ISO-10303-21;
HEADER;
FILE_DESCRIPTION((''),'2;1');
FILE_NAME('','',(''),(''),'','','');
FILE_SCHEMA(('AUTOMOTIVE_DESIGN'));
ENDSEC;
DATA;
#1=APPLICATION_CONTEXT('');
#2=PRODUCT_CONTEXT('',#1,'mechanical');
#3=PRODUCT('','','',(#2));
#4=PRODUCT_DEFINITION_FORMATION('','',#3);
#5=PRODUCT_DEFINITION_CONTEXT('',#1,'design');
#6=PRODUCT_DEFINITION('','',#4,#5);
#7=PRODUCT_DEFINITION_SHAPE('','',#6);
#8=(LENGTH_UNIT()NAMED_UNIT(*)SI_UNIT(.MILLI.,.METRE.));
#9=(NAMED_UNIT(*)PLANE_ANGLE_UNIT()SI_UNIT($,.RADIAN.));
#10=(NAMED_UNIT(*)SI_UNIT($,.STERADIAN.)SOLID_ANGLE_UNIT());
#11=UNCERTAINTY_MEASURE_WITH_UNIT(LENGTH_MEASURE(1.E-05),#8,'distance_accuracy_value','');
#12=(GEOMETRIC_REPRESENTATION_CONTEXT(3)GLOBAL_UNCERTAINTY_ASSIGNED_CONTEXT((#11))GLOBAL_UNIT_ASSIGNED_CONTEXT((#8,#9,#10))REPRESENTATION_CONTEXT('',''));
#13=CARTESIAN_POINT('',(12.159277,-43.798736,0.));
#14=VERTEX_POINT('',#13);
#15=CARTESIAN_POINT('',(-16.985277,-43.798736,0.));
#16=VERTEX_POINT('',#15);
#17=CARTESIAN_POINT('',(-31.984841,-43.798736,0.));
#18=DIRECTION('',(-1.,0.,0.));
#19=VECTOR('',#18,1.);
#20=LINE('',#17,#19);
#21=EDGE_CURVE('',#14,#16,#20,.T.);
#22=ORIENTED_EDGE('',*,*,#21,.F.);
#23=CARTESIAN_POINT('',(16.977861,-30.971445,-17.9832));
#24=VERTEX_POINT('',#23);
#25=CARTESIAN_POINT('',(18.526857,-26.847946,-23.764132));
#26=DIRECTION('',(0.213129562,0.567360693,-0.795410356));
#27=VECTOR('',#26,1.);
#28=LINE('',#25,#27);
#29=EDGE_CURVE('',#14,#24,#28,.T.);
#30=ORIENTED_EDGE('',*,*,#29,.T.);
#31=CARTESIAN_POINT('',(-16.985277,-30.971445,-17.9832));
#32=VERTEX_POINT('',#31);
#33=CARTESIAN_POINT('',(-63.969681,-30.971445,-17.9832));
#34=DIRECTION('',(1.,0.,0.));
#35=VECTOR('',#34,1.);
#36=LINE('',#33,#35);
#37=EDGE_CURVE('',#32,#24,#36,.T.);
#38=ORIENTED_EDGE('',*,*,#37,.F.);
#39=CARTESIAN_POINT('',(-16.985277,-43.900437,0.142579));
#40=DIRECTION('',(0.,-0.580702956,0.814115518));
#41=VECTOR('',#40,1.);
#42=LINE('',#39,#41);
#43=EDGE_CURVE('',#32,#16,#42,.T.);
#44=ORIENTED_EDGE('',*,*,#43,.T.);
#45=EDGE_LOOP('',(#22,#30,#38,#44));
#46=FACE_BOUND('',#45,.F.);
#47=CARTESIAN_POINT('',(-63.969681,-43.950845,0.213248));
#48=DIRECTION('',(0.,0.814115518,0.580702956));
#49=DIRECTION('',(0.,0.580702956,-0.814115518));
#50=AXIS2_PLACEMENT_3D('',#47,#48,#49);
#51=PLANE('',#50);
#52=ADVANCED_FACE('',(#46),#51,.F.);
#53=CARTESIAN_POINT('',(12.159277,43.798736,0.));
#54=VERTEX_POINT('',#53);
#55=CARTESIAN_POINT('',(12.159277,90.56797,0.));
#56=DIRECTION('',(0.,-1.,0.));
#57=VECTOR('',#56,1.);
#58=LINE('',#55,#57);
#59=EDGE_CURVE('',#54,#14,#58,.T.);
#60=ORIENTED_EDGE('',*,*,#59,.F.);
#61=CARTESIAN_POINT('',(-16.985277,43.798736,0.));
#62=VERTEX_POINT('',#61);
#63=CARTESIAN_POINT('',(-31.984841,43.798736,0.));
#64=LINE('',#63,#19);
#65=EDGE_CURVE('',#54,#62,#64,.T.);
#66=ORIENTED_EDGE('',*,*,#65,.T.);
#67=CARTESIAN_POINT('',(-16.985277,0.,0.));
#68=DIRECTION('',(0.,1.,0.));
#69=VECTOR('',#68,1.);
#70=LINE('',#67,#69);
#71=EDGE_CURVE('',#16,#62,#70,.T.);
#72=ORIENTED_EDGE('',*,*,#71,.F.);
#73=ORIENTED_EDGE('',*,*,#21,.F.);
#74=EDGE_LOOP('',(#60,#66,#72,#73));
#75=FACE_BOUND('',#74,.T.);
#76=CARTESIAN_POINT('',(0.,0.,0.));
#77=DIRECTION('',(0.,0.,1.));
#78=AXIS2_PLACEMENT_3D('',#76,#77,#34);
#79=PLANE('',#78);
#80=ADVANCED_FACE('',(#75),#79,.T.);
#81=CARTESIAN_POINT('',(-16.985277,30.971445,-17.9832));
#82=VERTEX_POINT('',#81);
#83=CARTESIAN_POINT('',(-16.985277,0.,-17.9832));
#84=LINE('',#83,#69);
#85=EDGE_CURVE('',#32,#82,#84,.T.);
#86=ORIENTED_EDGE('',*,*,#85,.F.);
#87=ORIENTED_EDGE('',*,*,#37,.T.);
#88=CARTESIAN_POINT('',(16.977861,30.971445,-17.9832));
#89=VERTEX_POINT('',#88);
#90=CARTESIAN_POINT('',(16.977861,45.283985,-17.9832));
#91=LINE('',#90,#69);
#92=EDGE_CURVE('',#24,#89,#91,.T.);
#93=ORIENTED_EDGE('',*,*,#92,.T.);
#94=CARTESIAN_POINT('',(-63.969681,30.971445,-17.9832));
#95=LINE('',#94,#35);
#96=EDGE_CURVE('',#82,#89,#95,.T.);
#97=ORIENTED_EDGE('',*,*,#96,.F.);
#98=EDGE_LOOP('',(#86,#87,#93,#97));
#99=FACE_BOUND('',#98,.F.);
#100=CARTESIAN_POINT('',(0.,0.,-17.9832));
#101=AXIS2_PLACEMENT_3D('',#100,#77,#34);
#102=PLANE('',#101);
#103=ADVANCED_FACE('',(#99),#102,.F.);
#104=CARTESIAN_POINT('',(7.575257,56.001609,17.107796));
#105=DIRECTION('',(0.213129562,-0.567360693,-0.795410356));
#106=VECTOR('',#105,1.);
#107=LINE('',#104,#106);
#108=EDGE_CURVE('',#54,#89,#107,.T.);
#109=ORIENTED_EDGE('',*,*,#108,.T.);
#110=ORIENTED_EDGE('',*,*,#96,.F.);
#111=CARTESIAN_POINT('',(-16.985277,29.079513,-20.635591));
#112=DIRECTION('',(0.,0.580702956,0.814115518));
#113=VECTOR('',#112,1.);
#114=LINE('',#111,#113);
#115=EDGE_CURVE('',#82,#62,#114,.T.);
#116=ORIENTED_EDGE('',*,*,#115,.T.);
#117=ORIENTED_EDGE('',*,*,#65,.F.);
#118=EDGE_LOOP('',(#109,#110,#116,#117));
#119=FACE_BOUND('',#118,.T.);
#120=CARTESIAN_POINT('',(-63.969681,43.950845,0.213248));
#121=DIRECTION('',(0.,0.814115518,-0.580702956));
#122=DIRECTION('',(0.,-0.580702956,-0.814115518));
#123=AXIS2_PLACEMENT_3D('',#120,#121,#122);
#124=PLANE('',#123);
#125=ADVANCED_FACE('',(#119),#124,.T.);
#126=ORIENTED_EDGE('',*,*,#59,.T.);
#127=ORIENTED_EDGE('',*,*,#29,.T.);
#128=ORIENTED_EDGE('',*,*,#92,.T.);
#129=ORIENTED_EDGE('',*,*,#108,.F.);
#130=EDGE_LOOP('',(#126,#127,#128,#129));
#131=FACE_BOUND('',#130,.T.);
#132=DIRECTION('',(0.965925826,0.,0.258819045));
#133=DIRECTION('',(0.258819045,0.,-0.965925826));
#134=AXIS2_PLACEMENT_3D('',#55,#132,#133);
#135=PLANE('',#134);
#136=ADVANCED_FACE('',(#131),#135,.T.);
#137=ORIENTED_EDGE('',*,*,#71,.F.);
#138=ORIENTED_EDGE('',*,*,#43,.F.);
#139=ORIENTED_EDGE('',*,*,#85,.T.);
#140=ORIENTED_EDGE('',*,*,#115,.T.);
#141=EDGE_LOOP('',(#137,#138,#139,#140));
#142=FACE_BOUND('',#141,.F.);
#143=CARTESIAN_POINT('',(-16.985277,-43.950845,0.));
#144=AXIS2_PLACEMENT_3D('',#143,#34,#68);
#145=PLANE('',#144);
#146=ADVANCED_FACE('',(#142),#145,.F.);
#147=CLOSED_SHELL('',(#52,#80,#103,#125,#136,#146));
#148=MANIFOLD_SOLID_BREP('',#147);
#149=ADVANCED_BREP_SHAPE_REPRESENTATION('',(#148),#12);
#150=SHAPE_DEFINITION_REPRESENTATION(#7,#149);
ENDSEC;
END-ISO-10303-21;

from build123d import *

# Parameters (mm, degrees)
F0_W        = 33.9705549621
F0_H        = 87.9016891122
F1_DEPTH    = 17.9832
F2_T1_DEPTH = 127.9393629633
F3_T1_DEPTH = 181.1359395425


# Not quite as in the source:
# - a fillet or chamfer that OpenCascade refuses, or shapes differently, is made with other operations: its cross-section is extruded or revolved along the edge and cut away or added


with BuildPart() as f1:
    # F0 (on Top) → F1 (new body)
    with BuildSketch(Plane.XY):
        Rectangle(F0_W, F0_H)
    extrude(amount=-F1_DEPTH)

    # F2: chamfer of 12.9794 x 18.1964476933 on 2 edges, made by hand

    # F2_s2 → F2_t1 (cut)
    with BuildSketch(Plane.YZ.offset(-63.9696814817)):
        Polygon((-43.9508445561, 0.2132476933), (-30.9714445561, -17.9832), (-43.9508445561, -17.9832), align=None)
        Polygon((43.9508445561, 0.2132476933), (30.9714445561, -17.9832), (43.9508445561, -17.9832), align=None)
    extrude(amount=F2_T1_DEPTH, mode=Mode.SUBTRACT)

    # F3: chamfer of 4.826 x 18.0108771973 on 1 edges, made by hand

    # F3_s2 → F3_t1 (cut)
    with BuildSketch(Plane.XZ.offset(-90.5679697713)):
        Polygon((12.1592774811, 0), (16.9852774811, -18.0108771973), (16.9852774811, 0), align=None)
    extrude(amount=F3_T1_DEPTH, mode=Mode.SUBTRACT)


solid = f1.part
